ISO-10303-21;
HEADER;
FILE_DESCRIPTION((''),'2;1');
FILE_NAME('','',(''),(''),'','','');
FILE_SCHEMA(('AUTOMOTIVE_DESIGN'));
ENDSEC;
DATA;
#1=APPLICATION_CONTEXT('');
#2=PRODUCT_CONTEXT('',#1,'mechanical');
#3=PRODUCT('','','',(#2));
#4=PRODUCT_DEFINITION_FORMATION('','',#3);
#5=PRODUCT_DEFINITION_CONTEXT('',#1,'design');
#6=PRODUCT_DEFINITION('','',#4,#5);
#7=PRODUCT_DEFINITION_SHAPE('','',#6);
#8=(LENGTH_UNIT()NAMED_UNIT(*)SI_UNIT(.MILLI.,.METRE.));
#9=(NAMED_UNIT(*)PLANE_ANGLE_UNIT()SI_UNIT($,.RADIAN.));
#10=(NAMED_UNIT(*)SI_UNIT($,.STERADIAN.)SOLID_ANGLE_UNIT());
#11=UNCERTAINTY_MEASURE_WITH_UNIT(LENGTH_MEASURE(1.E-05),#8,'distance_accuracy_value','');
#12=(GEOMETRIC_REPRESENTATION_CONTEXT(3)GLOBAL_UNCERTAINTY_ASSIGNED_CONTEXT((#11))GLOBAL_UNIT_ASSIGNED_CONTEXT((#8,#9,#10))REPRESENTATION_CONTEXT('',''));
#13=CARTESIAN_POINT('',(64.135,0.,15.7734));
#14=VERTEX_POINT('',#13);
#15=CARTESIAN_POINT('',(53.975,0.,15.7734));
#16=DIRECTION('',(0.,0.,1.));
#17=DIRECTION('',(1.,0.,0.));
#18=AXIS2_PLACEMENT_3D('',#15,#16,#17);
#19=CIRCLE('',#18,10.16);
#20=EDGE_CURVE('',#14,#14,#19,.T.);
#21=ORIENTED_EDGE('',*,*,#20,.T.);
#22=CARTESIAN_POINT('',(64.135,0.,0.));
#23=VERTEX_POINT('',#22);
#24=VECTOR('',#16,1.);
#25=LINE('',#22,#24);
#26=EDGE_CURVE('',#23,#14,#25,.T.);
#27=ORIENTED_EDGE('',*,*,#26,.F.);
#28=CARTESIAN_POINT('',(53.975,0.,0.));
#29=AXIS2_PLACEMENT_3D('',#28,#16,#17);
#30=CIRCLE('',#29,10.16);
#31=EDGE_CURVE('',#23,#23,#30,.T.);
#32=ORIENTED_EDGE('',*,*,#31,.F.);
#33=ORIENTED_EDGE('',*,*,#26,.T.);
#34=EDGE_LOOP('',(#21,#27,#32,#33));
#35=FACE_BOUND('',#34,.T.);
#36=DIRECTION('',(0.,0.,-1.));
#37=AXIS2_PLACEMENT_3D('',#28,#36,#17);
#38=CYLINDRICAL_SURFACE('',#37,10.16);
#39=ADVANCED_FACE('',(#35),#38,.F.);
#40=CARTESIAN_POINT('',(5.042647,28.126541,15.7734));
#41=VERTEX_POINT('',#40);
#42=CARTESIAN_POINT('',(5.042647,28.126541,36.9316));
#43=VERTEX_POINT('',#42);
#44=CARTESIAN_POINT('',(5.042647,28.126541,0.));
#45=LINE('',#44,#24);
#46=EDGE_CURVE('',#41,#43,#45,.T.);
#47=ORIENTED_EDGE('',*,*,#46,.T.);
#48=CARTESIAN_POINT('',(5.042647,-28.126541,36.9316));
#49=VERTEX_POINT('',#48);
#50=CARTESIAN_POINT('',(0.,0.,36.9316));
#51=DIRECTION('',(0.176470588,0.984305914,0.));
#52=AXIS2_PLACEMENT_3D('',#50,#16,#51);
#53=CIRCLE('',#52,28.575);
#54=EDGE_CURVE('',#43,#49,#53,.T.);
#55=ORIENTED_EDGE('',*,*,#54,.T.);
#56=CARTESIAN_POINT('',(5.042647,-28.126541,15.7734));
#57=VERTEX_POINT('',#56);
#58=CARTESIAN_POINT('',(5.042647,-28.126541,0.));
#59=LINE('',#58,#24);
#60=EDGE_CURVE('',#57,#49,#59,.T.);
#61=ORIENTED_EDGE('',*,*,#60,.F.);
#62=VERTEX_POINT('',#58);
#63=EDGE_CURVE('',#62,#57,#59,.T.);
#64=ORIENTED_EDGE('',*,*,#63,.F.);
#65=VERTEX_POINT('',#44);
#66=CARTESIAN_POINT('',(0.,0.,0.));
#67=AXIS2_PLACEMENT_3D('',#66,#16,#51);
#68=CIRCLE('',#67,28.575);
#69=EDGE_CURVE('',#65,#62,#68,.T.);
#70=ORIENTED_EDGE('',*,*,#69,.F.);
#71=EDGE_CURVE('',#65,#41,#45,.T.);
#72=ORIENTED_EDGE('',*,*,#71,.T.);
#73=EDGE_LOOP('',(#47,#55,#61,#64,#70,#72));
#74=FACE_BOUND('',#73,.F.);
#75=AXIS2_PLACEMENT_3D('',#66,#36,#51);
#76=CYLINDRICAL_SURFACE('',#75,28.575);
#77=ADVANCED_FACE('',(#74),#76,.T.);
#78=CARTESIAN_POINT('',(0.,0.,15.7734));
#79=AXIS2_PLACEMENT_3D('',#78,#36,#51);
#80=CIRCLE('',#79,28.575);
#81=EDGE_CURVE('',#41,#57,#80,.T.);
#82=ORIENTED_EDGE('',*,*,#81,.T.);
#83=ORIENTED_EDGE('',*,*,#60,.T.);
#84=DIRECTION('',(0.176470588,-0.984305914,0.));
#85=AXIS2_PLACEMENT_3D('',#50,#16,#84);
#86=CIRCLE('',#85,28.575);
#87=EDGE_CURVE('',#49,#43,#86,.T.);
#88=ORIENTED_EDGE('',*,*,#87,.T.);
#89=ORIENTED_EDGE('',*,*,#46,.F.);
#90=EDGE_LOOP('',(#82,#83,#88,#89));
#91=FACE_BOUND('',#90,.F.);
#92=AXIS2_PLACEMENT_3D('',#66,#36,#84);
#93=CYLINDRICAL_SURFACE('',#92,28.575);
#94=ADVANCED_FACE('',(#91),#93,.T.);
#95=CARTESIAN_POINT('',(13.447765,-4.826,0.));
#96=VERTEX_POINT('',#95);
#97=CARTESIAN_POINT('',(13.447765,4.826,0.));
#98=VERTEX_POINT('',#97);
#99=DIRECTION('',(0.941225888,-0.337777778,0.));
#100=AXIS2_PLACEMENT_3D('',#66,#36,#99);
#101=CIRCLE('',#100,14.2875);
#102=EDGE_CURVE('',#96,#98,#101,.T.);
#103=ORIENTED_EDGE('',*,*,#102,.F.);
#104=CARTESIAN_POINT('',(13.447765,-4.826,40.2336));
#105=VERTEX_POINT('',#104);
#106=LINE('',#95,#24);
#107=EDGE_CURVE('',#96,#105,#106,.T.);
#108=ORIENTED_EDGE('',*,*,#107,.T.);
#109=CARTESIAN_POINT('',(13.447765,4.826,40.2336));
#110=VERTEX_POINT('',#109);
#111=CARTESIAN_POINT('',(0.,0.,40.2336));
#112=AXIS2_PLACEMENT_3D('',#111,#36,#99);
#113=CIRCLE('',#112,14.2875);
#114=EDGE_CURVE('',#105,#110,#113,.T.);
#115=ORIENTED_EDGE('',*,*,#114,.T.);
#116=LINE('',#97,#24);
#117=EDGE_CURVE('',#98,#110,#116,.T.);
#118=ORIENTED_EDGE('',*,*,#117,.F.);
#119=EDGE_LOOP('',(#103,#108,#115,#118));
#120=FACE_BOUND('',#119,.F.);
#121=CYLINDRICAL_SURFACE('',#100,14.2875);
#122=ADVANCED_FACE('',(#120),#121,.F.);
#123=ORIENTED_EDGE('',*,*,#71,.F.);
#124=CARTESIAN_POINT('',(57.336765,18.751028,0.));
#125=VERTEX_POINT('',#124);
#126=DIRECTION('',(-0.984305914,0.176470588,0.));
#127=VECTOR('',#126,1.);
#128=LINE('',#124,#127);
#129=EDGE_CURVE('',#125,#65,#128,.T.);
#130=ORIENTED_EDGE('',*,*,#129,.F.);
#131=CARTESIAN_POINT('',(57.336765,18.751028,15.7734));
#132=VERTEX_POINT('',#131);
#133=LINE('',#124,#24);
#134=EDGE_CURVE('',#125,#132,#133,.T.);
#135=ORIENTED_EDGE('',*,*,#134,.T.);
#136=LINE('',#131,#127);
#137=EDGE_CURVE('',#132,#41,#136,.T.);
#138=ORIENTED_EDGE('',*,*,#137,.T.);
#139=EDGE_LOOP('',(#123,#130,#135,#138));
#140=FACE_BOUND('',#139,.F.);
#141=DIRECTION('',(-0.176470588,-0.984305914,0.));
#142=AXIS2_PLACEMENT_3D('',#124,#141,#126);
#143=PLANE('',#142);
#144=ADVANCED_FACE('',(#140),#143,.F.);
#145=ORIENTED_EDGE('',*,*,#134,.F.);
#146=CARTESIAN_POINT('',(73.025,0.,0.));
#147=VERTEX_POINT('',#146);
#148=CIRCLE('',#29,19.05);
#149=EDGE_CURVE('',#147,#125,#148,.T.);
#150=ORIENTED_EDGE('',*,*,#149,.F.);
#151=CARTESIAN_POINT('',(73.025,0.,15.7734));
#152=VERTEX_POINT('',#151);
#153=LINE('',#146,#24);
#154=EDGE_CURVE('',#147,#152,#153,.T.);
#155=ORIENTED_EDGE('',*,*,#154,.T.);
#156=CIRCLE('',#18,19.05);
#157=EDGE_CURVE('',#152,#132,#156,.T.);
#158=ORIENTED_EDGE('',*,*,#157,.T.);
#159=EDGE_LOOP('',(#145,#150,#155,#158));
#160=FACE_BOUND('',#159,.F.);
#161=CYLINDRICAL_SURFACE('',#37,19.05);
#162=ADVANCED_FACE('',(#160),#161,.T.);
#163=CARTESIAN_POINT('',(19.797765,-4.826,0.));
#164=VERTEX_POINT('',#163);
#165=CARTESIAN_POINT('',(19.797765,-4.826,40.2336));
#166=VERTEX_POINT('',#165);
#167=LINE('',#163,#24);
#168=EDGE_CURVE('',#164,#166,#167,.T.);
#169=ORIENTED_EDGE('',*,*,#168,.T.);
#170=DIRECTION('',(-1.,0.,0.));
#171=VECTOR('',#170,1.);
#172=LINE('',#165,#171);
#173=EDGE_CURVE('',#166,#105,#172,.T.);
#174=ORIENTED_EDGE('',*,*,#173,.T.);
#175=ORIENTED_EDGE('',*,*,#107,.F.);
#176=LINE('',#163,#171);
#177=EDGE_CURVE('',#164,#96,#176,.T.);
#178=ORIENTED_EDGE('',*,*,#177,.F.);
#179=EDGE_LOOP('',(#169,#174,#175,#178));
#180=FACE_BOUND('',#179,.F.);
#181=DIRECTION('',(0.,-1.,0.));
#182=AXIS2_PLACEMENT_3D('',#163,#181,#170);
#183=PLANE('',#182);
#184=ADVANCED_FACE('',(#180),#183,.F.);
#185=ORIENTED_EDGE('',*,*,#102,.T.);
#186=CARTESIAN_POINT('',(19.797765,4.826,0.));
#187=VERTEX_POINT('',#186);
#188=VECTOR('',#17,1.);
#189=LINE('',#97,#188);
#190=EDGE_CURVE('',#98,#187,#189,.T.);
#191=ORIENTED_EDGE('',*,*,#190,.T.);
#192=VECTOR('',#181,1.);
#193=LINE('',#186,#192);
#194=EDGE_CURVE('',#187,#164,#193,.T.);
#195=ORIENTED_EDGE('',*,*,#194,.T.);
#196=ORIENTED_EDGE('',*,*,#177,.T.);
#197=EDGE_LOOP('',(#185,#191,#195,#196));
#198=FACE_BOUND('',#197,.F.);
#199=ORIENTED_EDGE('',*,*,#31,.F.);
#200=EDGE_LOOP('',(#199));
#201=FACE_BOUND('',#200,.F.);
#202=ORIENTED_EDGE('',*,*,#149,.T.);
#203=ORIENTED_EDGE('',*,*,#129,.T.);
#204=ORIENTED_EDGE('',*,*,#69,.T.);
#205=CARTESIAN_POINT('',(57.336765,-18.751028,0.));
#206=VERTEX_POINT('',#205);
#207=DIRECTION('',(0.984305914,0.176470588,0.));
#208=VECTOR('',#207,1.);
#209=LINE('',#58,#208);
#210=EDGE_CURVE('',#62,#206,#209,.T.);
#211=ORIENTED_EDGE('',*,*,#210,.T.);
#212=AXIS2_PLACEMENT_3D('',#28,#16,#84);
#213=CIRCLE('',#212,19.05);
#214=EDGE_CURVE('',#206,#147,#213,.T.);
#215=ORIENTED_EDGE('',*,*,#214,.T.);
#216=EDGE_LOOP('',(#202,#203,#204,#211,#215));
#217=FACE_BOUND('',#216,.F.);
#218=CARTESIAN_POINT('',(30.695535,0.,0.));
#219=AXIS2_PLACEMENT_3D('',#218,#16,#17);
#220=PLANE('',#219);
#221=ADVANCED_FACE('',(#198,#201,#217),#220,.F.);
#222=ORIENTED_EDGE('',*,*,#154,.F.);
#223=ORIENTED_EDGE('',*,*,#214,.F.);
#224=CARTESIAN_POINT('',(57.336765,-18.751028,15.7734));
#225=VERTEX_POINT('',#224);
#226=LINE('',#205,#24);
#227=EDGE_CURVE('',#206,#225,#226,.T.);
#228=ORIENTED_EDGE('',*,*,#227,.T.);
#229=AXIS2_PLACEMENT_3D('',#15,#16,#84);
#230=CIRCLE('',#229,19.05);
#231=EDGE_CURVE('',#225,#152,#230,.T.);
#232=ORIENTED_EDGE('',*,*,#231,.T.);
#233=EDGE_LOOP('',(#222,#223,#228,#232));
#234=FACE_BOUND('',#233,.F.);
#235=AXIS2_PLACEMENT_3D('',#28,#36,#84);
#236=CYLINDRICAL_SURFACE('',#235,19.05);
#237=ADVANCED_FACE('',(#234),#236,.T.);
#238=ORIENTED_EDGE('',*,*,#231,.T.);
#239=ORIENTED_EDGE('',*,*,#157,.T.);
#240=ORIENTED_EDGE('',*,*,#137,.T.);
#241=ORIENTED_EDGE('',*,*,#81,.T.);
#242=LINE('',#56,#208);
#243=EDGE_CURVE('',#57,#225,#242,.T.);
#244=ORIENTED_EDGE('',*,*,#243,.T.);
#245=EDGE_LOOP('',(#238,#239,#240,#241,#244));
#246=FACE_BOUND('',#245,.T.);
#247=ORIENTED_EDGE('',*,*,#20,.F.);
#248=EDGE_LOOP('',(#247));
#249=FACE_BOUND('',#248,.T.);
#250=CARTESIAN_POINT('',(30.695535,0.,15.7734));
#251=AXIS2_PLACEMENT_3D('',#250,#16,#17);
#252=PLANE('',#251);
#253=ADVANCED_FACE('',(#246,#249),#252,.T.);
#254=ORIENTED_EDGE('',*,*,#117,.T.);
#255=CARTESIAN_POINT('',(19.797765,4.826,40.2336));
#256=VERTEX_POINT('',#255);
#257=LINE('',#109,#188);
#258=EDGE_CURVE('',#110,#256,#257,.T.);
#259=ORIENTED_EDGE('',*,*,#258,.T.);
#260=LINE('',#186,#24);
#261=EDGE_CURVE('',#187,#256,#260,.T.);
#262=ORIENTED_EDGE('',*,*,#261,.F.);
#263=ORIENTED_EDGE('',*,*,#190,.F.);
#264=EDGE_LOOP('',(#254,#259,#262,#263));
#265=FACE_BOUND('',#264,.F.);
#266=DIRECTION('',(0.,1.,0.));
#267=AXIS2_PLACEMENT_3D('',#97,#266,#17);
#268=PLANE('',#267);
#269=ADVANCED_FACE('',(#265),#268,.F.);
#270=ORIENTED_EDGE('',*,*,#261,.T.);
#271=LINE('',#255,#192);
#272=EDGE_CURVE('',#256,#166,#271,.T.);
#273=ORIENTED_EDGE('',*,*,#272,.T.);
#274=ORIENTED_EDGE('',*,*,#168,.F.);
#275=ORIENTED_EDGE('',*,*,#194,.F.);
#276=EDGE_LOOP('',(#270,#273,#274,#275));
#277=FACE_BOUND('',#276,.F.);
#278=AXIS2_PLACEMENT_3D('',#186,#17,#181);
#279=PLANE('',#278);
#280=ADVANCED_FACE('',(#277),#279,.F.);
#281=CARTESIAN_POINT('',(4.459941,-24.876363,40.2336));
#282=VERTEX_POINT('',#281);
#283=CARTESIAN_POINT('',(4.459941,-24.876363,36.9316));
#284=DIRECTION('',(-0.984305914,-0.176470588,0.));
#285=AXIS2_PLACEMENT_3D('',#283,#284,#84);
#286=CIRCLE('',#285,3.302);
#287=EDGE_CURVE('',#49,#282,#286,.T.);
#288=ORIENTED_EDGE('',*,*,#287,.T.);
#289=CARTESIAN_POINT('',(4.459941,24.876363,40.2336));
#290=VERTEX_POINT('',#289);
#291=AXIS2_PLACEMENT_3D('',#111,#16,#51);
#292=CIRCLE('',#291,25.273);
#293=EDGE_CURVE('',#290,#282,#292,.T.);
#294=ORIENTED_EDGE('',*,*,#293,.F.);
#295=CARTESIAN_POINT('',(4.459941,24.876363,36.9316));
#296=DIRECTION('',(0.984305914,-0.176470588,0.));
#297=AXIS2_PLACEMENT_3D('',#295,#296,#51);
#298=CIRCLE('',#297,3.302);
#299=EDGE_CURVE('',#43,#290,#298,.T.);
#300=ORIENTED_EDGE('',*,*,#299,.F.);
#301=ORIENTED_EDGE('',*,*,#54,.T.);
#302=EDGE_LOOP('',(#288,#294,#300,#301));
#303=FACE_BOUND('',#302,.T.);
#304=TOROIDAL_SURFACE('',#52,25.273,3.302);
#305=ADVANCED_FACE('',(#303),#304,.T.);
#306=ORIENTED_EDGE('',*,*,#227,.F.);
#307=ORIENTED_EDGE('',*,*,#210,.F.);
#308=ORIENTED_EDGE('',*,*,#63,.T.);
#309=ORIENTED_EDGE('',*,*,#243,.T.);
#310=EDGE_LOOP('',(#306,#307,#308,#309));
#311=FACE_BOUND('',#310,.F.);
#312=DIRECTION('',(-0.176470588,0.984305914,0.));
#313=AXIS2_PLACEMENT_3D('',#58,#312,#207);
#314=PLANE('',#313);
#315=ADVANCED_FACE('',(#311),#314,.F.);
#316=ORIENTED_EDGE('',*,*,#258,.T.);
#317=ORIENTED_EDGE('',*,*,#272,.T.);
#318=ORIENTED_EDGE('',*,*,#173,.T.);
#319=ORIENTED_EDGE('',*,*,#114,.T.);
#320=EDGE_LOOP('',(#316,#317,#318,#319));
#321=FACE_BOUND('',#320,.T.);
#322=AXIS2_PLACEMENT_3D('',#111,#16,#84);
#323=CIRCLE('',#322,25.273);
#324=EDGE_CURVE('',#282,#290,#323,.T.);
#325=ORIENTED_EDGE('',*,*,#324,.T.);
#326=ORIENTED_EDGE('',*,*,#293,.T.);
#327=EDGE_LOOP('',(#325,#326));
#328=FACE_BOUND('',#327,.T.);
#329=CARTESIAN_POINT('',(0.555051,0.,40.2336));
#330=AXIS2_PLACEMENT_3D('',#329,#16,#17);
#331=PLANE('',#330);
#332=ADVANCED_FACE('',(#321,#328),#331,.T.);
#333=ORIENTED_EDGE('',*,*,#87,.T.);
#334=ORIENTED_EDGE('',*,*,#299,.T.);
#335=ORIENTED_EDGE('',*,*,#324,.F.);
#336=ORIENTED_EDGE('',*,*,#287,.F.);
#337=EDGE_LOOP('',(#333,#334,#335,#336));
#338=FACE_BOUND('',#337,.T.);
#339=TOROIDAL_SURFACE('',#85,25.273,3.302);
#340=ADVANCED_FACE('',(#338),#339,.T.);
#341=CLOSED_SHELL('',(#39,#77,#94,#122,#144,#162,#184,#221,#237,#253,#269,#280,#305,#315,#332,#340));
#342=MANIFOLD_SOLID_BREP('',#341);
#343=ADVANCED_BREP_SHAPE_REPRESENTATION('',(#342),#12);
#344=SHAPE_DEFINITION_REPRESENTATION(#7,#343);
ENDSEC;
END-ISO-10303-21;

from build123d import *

# Parameters (mm, degrees)
F1_DEPTH = 40.2336
F0_R     = 10.16
F2_DEPTH = 15.7734
F3_R     = 3.302


# Not quite as in the source:
# - a feature names something its author has since deleted; it is built from what else it names


with BuildPart() as f1:
    # F0 (on Top) → F1 (new body)
    with BuildSketch(Plane.XY):
        with BuildLine():
            ThreePointArc((5.0426470588, -28.1265414802), (21.9160245563, -18.3362616868), (28.575, 0))
            ThreePointArc((28.575, 0), (21.9160245563, 18.3362616868), (5.0426470588, 28.1265414802))
            ThreePointArc((5.0426470588, 28.1265414802), (-28.575, 0), (5.0426470588, -28.1265414802))
        make_face()
        with BuildLine():
            ThreePointArc((13.4477648793, -4.826), (-14.2875, 0), (13.4477648793, 4.826))
            Line((13.4477648793, 4.826), (19.7977648793, 4.826))
            Line((19.7977648793, 4.826), (19.7977648793, -4.826))
            Line((19.7977648793, -4.826), (13.4477648793, -4.826))
        make_face(mode=Mode.SUBTRACT)
    extrude(amount=F1_DEPTH)

    # F0 (on Top) → F2 (join)
    with BuildSketch(Plane.XY):
        with BuildLine():
            ThreePointArc((5.0426470588, 28.1265414802), (21.9160245563, 18.3362616868), (28.575, 0))
            ThreePointArc((28.575, 0), (21.9160245563, -18.3362616868), (5.0426470588, -28.1265414802))
            Line((5.0426470588, -28.1265414802), (57.3367647059, -18.7510276535))
            ThreePointArc((57.3367647059, -18.7510276535), (34.925, 0), (57.3367647059, 18.7510276535))
            Line((57.3367647059, 18.7510276535), (5.0426470588, 28.1265414802))
        make_face()
        with BuildLine():
            ThreePointArc((73.025, 0), (68.5856830375, 12.2241744579), (57.3367647059, 18.7510276535))
            ThreePointArc((57.3367647059, 18.7510276535), (34.925, 0), (57.3367647059, -18.7510276535))
            ThreePointArc((57.3367647059, -18.7510276535), (68.5856830375, -12.2241744579), (73.025, 0))
        make_face()
        with Locations((53.975, 0)):
            Circle(F0_R, mode=Mode.SUBTRACT)
    extrude(amount=F2_DEPTH)

    # F3
    f3_edges = [f1.edges().sort_by_distance(p)[0] for p in [
        (-5.042647, 28.126541, 40.2336),
    ]]
    fillet(f3_edges, radius=F3_R)


solid = f1.part
